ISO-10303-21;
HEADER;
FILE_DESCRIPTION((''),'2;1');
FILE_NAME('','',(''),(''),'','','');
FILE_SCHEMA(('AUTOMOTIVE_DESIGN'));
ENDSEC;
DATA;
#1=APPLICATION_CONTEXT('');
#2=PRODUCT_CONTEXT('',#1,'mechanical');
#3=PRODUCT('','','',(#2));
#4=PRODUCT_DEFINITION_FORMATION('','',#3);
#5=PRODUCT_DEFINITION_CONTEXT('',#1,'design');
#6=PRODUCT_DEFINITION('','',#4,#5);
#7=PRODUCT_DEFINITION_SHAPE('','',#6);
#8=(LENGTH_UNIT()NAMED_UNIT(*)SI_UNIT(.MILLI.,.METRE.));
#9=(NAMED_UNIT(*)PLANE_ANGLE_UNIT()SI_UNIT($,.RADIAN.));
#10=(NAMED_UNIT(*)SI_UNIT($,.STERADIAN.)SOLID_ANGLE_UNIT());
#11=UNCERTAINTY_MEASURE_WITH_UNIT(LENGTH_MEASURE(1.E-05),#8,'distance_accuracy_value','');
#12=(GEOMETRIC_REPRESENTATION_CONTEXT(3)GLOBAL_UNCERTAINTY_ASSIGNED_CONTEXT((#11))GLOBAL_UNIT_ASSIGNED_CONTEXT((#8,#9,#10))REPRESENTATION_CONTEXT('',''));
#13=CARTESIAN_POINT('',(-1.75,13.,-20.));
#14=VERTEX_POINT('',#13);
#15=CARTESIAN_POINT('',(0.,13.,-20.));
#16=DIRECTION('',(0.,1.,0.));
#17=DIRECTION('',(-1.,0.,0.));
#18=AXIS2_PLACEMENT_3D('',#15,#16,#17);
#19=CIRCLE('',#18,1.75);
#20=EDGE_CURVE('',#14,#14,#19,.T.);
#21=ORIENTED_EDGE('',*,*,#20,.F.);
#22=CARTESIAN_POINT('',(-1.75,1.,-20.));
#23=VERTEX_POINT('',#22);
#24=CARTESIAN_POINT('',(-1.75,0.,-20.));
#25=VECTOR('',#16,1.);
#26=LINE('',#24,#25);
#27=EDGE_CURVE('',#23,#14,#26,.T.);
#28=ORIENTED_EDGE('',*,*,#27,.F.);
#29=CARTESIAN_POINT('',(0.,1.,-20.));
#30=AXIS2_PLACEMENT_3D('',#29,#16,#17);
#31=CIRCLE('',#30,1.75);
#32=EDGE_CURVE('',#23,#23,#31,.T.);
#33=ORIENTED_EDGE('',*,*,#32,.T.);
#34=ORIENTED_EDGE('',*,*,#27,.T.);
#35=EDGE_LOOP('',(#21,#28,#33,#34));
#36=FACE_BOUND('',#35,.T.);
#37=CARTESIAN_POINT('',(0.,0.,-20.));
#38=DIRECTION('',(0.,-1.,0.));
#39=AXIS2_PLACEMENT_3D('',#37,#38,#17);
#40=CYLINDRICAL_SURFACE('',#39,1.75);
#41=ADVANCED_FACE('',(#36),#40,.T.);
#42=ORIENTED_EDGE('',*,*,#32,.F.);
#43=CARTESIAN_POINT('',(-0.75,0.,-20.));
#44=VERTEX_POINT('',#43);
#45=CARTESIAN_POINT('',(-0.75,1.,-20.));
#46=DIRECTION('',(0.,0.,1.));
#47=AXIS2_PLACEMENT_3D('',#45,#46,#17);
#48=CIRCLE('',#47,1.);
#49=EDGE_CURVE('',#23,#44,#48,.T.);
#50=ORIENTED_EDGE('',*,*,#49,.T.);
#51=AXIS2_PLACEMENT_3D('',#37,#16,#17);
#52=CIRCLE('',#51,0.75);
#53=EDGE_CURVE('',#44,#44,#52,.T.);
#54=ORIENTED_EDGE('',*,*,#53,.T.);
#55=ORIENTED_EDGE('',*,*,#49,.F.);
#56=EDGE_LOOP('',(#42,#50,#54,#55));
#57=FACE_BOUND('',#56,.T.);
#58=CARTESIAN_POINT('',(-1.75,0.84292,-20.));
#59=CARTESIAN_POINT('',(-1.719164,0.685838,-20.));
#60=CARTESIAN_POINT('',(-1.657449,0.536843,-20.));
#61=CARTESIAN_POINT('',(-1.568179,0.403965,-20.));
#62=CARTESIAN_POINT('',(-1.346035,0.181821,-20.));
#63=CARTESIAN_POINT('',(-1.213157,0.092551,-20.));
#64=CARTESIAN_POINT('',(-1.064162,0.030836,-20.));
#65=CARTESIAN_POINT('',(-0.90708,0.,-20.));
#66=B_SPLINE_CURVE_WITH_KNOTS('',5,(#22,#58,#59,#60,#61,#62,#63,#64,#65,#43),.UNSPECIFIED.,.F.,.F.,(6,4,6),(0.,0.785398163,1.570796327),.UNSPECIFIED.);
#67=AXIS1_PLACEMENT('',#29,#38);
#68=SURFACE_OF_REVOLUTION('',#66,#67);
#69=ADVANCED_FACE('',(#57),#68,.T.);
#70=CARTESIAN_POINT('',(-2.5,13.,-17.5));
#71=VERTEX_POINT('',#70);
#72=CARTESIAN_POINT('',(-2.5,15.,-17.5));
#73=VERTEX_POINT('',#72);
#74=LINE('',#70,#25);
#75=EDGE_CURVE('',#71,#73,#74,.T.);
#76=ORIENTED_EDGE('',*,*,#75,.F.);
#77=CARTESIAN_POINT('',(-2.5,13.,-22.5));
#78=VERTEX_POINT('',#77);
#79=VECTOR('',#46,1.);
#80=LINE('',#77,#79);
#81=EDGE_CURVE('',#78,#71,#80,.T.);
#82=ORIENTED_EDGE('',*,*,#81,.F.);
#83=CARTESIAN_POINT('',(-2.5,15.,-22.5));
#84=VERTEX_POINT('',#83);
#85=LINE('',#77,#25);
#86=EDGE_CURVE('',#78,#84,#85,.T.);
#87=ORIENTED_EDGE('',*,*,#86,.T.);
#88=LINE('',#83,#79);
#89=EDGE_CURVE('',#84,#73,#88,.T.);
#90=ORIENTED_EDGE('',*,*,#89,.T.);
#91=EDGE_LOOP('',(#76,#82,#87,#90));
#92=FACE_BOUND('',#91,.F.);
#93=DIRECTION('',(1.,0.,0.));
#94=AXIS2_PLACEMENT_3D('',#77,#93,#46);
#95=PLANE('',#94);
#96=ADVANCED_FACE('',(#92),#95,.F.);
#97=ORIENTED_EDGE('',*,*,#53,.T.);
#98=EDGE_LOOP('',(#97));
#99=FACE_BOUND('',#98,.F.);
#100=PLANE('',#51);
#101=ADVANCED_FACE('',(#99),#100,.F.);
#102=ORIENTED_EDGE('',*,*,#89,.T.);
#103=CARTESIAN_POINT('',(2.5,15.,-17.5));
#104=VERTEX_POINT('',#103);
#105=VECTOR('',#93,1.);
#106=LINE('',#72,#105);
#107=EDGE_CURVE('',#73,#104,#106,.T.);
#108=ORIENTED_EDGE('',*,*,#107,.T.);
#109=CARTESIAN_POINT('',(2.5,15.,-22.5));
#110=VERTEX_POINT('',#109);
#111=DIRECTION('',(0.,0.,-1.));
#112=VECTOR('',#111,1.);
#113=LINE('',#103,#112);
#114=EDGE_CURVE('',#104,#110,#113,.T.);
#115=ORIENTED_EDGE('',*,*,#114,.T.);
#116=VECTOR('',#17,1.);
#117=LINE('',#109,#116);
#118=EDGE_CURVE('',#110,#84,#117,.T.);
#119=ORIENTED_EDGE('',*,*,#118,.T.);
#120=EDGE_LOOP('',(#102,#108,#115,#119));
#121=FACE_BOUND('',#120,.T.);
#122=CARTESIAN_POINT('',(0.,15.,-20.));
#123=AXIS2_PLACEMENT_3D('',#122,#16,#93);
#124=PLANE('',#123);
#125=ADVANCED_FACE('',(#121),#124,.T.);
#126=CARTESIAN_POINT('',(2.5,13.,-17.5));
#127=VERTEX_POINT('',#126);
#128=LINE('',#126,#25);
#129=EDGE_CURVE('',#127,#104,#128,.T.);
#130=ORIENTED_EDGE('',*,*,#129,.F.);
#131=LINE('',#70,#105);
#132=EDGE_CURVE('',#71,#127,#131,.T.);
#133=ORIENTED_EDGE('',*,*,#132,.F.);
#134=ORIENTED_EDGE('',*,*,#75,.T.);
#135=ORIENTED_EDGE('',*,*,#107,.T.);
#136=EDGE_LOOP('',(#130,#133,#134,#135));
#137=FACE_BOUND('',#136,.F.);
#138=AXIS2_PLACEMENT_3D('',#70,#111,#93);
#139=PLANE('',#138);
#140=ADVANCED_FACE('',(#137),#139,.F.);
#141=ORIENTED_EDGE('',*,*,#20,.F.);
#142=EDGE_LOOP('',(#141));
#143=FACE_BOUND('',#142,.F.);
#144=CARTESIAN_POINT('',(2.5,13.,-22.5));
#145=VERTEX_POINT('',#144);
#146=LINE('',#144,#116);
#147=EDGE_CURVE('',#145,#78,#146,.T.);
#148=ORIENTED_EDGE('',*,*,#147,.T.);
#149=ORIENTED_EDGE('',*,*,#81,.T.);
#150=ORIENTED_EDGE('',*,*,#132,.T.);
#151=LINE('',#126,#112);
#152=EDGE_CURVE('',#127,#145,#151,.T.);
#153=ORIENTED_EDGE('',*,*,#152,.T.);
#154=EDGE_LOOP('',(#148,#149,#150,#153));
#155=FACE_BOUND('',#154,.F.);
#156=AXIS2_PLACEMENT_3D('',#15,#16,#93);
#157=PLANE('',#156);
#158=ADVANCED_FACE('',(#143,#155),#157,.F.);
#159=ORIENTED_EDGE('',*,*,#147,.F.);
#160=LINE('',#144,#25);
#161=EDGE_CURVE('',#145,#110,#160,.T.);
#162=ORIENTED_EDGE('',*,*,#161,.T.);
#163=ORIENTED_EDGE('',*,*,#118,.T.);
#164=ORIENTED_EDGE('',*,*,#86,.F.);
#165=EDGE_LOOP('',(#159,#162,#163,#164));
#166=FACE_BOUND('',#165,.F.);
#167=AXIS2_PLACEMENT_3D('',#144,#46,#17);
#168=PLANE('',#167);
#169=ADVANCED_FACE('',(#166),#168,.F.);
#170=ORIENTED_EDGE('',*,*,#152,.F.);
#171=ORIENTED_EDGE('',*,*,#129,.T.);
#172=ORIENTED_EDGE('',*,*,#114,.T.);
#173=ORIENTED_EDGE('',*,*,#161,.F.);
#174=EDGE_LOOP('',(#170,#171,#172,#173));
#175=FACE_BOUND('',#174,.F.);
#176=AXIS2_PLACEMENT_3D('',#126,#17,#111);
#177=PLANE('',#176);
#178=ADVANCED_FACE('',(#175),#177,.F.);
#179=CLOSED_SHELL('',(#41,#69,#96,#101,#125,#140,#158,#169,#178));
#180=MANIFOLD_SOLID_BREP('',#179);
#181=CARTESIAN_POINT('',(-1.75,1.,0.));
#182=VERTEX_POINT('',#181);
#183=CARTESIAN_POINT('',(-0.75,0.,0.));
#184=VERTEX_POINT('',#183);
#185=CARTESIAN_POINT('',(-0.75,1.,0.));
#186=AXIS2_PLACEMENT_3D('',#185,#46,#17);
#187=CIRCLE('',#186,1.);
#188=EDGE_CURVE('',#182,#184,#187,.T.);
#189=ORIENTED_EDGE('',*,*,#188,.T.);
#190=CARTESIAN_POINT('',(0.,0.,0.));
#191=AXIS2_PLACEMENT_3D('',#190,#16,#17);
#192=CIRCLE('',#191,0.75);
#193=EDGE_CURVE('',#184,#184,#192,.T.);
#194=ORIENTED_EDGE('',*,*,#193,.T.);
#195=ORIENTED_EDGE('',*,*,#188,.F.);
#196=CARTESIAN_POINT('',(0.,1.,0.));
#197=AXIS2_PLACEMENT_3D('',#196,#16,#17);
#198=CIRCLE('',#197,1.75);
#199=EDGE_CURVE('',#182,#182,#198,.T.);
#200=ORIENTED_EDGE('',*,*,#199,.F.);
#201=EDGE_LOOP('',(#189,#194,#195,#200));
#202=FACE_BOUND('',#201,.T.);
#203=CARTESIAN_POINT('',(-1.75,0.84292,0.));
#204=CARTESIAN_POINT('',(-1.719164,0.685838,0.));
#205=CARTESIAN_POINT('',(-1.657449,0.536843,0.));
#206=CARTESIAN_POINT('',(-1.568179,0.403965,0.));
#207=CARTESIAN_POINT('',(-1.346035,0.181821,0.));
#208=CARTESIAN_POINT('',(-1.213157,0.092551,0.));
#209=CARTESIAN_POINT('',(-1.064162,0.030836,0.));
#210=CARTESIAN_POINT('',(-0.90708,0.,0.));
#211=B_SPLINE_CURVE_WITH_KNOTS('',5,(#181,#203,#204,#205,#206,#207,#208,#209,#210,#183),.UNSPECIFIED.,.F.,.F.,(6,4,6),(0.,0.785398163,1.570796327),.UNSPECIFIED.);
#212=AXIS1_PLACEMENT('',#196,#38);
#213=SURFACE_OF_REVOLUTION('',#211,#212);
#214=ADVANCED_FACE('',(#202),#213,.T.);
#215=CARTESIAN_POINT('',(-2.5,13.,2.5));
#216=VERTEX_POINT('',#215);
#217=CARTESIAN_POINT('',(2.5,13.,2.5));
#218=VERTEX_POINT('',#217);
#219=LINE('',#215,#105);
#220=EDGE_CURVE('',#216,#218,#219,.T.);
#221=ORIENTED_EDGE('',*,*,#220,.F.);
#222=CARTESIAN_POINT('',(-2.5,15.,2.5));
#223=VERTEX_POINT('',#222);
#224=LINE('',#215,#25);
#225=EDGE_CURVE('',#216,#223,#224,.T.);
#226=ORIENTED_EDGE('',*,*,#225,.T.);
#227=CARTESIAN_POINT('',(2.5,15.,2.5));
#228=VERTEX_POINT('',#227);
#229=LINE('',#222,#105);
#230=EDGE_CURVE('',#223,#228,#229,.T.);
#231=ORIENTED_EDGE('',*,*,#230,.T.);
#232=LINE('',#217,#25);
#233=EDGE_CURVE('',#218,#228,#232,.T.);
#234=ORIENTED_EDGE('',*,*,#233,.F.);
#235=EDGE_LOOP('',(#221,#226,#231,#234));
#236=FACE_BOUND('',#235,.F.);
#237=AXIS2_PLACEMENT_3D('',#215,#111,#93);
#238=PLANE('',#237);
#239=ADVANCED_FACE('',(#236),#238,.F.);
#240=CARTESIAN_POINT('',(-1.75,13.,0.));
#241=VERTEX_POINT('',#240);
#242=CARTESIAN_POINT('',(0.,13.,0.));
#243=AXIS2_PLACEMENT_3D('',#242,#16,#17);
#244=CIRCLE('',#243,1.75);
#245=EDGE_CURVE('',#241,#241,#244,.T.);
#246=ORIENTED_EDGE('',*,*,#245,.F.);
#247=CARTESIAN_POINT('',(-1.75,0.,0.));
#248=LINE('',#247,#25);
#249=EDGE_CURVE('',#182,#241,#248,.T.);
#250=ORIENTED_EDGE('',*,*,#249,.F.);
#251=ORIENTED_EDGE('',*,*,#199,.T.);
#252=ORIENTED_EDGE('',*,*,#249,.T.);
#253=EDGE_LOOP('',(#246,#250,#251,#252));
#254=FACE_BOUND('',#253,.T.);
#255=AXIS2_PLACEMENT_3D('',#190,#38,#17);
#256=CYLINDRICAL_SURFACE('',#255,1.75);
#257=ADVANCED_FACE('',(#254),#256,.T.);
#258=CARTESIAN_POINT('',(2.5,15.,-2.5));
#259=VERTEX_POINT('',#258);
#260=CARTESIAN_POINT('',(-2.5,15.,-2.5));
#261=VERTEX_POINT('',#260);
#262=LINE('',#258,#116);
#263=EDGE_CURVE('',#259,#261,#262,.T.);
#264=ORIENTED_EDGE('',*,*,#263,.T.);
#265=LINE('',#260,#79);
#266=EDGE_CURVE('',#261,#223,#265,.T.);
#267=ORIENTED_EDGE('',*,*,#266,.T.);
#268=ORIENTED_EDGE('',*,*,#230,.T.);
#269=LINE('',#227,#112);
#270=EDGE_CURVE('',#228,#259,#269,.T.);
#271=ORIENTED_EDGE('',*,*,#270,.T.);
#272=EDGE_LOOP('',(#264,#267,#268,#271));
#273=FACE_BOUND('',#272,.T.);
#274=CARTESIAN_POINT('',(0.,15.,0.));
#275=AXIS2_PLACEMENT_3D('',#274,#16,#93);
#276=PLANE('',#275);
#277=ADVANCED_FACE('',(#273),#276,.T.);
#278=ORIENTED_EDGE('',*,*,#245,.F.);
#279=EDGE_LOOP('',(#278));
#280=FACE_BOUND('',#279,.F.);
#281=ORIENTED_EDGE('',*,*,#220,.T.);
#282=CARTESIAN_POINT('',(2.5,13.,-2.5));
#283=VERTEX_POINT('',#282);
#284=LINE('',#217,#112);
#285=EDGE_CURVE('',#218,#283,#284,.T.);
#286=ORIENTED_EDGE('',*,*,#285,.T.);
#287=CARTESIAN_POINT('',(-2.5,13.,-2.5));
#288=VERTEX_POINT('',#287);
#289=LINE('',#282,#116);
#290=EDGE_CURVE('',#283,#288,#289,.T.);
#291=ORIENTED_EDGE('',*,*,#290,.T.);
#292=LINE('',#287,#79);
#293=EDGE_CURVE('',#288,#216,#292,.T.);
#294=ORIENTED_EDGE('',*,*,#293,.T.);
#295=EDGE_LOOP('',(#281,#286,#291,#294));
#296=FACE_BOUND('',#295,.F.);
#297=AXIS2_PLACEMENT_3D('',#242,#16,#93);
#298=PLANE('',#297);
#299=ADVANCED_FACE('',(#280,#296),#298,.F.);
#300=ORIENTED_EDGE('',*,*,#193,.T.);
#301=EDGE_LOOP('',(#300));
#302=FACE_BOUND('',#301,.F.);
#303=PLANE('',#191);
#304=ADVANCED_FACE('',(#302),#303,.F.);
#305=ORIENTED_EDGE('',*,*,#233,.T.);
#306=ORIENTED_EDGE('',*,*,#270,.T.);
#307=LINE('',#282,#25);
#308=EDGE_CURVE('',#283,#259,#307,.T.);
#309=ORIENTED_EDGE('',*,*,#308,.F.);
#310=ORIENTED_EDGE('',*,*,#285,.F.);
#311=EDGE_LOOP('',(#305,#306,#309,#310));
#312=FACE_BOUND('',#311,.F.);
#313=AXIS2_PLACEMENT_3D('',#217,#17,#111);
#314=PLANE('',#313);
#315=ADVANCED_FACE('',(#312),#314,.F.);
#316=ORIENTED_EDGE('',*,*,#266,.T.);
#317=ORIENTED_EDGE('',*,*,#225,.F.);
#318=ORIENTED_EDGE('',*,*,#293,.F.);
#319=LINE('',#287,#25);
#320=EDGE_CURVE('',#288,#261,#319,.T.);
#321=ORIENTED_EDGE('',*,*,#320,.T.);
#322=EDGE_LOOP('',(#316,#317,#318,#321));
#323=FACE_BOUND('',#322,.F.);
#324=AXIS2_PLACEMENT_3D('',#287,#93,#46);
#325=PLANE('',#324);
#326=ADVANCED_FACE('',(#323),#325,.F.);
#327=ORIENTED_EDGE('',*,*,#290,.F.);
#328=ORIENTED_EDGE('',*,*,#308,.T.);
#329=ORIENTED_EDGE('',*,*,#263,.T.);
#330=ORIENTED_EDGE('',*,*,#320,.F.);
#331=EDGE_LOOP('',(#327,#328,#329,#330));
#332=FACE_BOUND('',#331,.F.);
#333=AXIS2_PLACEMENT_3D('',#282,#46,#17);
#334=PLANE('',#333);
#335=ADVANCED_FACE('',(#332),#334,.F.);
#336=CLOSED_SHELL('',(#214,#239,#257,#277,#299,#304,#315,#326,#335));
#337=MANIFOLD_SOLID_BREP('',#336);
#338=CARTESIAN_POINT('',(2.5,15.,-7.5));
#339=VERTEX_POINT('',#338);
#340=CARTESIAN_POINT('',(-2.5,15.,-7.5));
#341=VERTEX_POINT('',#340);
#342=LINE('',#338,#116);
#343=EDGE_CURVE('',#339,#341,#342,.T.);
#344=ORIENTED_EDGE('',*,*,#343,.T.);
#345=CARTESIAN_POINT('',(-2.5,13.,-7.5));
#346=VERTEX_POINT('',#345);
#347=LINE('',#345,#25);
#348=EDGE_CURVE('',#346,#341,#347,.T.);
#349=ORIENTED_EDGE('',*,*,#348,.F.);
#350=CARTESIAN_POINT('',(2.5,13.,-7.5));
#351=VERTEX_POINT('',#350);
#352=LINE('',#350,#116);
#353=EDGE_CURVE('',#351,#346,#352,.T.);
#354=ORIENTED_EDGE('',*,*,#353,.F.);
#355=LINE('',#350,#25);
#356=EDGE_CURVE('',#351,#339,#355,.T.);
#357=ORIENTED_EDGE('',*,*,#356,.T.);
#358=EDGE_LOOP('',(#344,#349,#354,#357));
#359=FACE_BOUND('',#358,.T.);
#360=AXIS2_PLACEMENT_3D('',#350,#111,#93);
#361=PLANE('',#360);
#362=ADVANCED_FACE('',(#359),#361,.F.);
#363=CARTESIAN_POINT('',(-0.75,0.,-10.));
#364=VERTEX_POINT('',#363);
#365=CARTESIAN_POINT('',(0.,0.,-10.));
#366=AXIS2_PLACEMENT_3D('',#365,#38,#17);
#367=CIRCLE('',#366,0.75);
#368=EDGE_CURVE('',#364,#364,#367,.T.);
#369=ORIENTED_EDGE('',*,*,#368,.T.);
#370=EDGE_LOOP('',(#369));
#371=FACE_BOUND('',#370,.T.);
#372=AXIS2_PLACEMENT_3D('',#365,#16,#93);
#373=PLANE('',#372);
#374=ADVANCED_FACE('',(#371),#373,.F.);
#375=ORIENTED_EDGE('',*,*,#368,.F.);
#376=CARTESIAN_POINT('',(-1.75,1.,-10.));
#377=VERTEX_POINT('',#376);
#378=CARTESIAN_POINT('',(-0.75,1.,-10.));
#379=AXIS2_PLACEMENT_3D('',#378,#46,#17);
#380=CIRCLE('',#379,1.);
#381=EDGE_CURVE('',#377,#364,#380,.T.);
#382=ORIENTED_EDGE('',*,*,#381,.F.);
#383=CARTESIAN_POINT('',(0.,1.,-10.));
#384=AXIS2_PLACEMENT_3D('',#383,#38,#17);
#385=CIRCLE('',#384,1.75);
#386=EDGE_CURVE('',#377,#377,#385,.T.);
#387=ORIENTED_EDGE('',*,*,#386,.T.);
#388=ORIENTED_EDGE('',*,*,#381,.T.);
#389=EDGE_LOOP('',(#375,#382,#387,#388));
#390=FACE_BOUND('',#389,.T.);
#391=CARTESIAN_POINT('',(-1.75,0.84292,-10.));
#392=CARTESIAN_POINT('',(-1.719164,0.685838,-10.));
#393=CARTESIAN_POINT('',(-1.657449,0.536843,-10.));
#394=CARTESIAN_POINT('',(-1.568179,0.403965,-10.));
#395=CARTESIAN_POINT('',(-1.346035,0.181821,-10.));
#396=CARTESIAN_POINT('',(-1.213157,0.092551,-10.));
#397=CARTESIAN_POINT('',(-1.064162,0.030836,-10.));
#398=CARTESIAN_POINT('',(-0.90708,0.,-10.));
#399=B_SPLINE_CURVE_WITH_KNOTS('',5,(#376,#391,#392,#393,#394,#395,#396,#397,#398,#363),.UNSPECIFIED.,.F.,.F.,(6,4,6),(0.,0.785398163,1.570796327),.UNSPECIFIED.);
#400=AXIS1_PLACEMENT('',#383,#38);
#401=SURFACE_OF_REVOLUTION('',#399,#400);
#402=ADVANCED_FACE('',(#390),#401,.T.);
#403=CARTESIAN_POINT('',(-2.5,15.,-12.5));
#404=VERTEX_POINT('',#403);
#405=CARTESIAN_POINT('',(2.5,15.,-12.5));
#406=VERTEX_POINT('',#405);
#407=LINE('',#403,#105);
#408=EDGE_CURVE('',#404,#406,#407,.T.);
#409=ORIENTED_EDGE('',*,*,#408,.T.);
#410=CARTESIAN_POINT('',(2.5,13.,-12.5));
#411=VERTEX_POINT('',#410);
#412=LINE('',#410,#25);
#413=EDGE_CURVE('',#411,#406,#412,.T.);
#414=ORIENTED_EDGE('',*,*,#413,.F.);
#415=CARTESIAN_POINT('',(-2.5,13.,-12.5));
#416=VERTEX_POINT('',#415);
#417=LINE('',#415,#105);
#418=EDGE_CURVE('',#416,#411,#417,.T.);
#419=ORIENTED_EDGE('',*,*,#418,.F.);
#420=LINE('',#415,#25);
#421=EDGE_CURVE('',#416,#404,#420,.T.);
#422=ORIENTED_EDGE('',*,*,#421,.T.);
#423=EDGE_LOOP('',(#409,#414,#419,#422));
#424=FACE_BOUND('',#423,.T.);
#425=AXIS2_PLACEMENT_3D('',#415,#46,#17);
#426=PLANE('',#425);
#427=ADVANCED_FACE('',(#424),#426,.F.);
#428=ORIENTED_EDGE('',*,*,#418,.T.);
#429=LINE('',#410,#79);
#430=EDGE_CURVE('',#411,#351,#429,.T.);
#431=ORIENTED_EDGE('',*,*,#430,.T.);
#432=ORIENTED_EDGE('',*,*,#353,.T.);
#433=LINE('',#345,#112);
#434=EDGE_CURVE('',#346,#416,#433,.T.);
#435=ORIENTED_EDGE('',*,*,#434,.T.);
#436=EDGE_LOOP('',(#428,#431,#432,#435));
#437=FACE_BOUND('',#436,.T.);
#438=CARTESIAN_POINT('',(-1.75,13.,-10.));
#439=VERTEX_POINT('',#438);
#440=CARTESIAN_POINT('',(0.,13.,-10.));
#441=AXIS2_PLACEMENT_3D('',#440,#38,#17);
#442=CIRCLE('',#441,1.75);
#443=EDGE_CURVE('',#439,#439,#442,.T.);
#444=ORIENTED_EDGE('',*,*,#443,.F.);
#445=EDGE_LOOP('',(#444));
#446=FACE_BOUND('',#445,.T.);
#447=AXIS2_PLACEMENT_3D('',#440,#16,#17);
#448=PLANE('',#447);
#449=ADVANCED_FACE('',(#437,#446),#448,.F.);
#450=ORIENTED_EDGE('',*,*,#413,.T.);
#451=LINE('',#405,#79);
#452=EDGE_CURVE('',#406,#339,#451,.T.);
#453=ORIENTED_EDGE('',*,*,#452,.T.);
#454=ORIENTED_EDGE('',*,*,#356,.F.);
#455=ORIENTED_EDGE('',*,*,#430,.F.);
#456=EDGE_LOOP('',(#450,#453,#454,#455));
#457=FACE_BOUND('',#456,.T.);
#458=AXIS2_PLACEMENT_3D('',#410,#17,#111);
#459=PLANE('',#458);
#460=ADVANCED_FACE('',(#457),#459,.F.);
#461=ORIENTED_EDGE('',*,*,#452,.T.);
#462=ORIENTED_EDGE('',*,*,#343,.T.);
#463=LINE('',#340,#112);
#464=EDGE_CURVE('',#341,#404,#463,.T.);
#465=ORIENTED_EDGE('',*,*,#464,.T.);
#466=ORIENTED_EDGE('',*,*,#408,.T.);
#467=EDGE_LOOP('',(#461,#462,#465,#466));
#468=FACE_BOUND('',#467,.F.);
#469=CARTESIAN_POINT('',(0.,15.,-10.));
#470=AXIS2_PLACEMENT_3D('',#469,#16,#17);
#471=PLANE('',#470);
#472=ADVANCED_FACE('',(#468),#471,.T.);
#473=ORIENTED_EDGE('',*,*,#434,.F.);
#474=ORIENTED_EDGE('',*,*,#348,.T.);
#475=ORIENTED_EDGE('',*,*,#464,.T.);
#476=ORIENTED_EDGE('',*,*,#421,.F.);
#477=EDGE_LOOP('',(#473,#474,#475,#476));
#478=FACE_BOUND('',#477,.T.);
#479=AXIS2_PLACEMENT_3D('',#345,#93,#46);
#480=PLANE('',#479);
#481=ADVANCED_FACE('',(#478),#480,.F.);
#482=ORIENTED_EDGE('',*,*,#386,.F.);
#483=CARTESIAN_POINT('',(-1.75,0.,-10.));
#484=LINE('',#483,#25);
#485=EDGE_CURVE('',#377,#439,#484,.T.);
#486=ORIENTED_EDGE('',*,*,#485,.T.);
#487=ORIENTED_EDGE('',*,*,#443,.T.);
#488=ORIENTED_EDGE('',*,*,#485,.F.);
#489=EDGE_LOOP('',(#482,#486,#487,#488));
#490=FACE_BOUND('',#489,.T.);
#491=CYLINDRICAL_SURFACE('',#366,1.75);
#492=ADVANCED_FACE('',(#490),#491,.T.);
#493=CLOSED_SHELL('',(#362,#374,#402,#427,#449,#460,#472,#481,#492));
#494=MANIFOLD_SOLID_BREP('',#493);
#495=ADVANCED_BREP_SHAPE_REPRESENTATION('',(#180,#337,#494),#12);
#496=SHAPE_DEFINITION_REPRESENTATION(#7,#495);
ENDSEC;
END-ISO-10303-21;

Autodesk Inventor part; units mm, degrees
ref_plane "YZ Plane" through (0, 0, 0) normal (1, 0, 0) x (0, 1, 0)
ref_plane "XZ Plane" through (0, 0, 0) normal (0, 1, 0) x (-1, 0, 0)
ref_plane "XY Plane" through (0, 0, 0) normal (0, 0, 1) x (1, 0, 0)
sketch "Sketch1" plane through (0, 0, 0) normal (0, 1, 0) x (-1, 0, 0)
  circle A0 centre (0, 0) radius 1.75
  dimension "d1" = 3.5
  dimension "d5" = 0
extrude "Extrusion1" add sketch "Sketch1" along normal blind 13
sketch "Sketch5" plane through (0, 13, 0) normal (0, 1, 0) x (1, 0, 0)
  circle A0 centre (0, 0) radius 1.75 projected
  line L0 (-2.5, -2.5) -> (2.5, -2.5)
  line L1 (2.5, -2.5) -> (2.5, 2.5)
  line L2 (2.5, 2.5) -> (-2.5, 2.5)
  line L3 (-2.5, 2.5) -> (-2.5, -2.5)
  line L4 (-2.5, -2.5) -> (2.5, 2.5) construction
  line L5 (2.5, -2.5) -> (-2.5, 2.5) construction
  dimension "d14" = 5
  dimension "d15" = 5
extrude "Extrusion2" add sketch "Sketch5" along normal blind 2 contours A0 | L3 L2 L1 L0
sketch "Sketch6" plane through (0, 0, 0) normal (0, 1, 0) x (-1, 0, 0)
  point P0 (0, 0)
ref_plane "Work Plane1" through (2.5, 13, -5) normal (0, 0, -1) x (-1, 0, 0)
mirror "Mirror1" about plane through (2.5, 13, -5) normal (0, 0, -1)
ref_plane "Work Plane2" through (2.5, 13, -15) normal (0, 0, -1) x (-1, 0, 0)
mirror "Mirror2" about plane through (2.5, 13, -15) normal (0, 0, -1) of "Mirror1"
fillet "Fillet1" radius 1 3 edges at (1.75, 0, 0) (1.75, 0, -10) (1.75, 0, -20)
equation "\"d1\" = d0"
equation "\"d15\" = d14"
equation "\"d0\" = 3.5"
